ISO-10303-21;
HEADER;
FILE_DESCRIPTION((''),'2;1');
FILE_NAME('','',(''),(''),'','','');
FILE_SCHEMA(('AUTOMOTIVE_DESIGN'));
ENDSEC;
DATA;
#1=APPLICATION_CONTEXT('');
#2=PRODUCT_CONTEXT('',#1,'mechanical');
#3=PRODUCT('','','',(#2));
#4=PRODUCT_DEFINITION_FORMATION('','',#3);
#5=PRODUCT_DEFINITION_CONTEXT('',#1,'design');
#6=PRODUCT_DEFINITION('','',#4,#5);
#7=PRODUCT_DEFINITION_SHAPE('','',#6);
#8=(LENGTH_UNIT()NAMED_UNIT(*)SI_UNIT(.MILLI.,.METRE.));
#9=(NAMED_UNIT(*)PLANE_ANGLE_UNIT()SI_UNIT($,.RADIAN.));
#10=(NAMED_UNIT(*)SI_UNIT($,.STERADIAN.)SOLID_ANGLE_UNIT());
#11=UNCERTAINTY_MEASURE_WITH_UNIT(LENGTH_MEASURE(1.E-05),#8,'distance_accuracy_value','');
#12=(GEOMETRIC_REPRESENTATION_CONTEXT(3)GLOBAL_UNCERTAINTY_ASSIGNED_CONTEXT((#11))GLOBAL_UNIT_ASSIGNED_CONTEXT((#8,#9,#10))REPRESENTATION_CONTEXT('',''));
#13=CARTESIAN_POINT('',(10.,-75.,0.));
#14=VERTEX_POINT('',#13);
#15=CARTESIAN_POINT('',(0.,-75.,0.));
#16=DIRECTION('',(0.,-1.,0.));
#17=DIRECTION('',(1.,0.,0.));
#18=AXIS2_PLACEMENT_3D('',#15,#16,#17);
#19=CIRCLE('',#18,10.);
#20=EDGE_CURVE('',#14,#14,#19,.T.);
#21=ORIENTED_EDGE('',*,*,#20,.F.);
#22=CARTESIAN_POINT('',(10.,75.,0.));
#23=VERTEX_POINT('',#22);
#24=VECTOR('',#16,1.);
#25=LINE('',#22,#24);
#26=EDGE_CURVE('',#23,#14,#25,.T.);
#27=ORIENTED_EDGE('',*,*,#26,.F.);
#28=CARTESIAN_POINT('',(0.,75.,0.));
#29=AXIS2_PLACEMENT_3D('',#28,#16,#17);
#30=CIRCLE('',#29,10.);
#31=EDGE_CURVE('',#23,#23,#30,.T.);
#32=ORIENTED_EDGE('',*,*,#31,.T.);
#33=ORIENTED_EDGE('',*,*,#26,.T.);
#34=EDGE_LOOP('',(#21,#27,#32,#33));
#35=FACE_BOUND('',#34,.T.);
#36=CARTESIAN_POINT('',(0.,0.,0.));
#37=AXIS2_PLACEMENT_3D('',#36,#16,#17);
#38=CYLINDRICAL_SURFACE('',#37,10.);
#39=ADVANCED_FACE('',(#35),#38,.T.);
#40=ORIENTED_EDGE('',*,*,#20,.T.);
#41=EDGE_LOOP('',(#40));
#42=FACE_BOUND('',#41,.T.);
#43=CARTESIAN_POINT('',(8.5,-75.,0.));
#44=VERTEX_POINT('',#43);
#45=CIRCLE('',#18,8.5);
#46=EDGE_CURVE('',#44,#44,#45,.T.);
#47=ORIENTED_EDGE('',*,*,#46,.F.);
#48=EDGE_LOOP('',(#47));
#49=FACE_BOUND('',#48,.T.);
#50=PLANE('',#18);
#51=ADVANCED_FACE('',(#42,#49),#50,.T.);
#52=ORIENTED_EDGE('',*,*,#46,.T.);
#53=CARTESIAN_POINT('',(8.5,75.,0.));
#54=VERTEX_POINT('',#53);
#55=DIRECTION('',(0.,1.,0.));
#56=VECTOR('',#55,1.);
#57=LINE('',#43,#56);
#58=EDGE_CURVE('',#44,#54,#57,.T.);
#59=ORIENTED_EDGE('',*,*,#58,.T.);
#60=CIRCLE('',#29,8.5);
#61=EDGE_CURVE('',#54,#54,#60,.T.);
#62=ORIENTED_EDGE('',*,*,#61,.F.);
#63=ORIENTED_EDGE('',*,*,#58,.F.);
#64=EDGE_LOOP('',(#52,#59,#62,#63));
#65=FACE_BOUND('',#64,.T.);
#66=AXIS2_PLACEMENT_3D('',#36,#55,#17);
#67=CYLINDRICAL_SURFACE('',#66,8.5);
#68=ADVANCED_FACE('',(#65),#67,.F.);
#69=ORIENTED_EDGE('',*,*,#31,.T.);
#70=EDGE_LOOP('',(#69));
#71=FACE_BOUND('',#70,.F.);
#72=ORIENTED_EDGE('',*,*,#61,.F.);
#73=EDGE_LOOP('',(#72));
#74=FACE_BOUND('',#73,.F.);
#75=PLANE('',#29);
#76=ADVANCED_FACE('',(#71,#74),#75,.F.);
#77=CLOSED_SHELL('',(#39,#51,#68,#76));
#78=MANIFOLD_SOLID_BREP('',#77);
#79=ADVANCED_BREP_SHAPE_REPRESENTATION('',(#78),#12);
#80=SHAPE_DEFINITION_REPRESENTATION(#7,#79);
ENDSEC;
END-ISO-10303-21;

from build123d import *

# Parameters (mm, degrees)
F0_R     = 10
F0_R_2   = 8.5
F1_DEPTH = 75


# Not quite as in the source:
# - a feature names something its author has since deleted; it is built from what else it names


with BuildPart() as f1:
    # F0 (on Front) → F1 (new body, symmetric)
    with BuildSketch(Plane.XZ):
        Circle(F0_R)
        Circle(F0_R_2, mode=Mode.SUBTRACT)
    extrude(amount=F1_DEPTH, both=True)


solid = f1.part
